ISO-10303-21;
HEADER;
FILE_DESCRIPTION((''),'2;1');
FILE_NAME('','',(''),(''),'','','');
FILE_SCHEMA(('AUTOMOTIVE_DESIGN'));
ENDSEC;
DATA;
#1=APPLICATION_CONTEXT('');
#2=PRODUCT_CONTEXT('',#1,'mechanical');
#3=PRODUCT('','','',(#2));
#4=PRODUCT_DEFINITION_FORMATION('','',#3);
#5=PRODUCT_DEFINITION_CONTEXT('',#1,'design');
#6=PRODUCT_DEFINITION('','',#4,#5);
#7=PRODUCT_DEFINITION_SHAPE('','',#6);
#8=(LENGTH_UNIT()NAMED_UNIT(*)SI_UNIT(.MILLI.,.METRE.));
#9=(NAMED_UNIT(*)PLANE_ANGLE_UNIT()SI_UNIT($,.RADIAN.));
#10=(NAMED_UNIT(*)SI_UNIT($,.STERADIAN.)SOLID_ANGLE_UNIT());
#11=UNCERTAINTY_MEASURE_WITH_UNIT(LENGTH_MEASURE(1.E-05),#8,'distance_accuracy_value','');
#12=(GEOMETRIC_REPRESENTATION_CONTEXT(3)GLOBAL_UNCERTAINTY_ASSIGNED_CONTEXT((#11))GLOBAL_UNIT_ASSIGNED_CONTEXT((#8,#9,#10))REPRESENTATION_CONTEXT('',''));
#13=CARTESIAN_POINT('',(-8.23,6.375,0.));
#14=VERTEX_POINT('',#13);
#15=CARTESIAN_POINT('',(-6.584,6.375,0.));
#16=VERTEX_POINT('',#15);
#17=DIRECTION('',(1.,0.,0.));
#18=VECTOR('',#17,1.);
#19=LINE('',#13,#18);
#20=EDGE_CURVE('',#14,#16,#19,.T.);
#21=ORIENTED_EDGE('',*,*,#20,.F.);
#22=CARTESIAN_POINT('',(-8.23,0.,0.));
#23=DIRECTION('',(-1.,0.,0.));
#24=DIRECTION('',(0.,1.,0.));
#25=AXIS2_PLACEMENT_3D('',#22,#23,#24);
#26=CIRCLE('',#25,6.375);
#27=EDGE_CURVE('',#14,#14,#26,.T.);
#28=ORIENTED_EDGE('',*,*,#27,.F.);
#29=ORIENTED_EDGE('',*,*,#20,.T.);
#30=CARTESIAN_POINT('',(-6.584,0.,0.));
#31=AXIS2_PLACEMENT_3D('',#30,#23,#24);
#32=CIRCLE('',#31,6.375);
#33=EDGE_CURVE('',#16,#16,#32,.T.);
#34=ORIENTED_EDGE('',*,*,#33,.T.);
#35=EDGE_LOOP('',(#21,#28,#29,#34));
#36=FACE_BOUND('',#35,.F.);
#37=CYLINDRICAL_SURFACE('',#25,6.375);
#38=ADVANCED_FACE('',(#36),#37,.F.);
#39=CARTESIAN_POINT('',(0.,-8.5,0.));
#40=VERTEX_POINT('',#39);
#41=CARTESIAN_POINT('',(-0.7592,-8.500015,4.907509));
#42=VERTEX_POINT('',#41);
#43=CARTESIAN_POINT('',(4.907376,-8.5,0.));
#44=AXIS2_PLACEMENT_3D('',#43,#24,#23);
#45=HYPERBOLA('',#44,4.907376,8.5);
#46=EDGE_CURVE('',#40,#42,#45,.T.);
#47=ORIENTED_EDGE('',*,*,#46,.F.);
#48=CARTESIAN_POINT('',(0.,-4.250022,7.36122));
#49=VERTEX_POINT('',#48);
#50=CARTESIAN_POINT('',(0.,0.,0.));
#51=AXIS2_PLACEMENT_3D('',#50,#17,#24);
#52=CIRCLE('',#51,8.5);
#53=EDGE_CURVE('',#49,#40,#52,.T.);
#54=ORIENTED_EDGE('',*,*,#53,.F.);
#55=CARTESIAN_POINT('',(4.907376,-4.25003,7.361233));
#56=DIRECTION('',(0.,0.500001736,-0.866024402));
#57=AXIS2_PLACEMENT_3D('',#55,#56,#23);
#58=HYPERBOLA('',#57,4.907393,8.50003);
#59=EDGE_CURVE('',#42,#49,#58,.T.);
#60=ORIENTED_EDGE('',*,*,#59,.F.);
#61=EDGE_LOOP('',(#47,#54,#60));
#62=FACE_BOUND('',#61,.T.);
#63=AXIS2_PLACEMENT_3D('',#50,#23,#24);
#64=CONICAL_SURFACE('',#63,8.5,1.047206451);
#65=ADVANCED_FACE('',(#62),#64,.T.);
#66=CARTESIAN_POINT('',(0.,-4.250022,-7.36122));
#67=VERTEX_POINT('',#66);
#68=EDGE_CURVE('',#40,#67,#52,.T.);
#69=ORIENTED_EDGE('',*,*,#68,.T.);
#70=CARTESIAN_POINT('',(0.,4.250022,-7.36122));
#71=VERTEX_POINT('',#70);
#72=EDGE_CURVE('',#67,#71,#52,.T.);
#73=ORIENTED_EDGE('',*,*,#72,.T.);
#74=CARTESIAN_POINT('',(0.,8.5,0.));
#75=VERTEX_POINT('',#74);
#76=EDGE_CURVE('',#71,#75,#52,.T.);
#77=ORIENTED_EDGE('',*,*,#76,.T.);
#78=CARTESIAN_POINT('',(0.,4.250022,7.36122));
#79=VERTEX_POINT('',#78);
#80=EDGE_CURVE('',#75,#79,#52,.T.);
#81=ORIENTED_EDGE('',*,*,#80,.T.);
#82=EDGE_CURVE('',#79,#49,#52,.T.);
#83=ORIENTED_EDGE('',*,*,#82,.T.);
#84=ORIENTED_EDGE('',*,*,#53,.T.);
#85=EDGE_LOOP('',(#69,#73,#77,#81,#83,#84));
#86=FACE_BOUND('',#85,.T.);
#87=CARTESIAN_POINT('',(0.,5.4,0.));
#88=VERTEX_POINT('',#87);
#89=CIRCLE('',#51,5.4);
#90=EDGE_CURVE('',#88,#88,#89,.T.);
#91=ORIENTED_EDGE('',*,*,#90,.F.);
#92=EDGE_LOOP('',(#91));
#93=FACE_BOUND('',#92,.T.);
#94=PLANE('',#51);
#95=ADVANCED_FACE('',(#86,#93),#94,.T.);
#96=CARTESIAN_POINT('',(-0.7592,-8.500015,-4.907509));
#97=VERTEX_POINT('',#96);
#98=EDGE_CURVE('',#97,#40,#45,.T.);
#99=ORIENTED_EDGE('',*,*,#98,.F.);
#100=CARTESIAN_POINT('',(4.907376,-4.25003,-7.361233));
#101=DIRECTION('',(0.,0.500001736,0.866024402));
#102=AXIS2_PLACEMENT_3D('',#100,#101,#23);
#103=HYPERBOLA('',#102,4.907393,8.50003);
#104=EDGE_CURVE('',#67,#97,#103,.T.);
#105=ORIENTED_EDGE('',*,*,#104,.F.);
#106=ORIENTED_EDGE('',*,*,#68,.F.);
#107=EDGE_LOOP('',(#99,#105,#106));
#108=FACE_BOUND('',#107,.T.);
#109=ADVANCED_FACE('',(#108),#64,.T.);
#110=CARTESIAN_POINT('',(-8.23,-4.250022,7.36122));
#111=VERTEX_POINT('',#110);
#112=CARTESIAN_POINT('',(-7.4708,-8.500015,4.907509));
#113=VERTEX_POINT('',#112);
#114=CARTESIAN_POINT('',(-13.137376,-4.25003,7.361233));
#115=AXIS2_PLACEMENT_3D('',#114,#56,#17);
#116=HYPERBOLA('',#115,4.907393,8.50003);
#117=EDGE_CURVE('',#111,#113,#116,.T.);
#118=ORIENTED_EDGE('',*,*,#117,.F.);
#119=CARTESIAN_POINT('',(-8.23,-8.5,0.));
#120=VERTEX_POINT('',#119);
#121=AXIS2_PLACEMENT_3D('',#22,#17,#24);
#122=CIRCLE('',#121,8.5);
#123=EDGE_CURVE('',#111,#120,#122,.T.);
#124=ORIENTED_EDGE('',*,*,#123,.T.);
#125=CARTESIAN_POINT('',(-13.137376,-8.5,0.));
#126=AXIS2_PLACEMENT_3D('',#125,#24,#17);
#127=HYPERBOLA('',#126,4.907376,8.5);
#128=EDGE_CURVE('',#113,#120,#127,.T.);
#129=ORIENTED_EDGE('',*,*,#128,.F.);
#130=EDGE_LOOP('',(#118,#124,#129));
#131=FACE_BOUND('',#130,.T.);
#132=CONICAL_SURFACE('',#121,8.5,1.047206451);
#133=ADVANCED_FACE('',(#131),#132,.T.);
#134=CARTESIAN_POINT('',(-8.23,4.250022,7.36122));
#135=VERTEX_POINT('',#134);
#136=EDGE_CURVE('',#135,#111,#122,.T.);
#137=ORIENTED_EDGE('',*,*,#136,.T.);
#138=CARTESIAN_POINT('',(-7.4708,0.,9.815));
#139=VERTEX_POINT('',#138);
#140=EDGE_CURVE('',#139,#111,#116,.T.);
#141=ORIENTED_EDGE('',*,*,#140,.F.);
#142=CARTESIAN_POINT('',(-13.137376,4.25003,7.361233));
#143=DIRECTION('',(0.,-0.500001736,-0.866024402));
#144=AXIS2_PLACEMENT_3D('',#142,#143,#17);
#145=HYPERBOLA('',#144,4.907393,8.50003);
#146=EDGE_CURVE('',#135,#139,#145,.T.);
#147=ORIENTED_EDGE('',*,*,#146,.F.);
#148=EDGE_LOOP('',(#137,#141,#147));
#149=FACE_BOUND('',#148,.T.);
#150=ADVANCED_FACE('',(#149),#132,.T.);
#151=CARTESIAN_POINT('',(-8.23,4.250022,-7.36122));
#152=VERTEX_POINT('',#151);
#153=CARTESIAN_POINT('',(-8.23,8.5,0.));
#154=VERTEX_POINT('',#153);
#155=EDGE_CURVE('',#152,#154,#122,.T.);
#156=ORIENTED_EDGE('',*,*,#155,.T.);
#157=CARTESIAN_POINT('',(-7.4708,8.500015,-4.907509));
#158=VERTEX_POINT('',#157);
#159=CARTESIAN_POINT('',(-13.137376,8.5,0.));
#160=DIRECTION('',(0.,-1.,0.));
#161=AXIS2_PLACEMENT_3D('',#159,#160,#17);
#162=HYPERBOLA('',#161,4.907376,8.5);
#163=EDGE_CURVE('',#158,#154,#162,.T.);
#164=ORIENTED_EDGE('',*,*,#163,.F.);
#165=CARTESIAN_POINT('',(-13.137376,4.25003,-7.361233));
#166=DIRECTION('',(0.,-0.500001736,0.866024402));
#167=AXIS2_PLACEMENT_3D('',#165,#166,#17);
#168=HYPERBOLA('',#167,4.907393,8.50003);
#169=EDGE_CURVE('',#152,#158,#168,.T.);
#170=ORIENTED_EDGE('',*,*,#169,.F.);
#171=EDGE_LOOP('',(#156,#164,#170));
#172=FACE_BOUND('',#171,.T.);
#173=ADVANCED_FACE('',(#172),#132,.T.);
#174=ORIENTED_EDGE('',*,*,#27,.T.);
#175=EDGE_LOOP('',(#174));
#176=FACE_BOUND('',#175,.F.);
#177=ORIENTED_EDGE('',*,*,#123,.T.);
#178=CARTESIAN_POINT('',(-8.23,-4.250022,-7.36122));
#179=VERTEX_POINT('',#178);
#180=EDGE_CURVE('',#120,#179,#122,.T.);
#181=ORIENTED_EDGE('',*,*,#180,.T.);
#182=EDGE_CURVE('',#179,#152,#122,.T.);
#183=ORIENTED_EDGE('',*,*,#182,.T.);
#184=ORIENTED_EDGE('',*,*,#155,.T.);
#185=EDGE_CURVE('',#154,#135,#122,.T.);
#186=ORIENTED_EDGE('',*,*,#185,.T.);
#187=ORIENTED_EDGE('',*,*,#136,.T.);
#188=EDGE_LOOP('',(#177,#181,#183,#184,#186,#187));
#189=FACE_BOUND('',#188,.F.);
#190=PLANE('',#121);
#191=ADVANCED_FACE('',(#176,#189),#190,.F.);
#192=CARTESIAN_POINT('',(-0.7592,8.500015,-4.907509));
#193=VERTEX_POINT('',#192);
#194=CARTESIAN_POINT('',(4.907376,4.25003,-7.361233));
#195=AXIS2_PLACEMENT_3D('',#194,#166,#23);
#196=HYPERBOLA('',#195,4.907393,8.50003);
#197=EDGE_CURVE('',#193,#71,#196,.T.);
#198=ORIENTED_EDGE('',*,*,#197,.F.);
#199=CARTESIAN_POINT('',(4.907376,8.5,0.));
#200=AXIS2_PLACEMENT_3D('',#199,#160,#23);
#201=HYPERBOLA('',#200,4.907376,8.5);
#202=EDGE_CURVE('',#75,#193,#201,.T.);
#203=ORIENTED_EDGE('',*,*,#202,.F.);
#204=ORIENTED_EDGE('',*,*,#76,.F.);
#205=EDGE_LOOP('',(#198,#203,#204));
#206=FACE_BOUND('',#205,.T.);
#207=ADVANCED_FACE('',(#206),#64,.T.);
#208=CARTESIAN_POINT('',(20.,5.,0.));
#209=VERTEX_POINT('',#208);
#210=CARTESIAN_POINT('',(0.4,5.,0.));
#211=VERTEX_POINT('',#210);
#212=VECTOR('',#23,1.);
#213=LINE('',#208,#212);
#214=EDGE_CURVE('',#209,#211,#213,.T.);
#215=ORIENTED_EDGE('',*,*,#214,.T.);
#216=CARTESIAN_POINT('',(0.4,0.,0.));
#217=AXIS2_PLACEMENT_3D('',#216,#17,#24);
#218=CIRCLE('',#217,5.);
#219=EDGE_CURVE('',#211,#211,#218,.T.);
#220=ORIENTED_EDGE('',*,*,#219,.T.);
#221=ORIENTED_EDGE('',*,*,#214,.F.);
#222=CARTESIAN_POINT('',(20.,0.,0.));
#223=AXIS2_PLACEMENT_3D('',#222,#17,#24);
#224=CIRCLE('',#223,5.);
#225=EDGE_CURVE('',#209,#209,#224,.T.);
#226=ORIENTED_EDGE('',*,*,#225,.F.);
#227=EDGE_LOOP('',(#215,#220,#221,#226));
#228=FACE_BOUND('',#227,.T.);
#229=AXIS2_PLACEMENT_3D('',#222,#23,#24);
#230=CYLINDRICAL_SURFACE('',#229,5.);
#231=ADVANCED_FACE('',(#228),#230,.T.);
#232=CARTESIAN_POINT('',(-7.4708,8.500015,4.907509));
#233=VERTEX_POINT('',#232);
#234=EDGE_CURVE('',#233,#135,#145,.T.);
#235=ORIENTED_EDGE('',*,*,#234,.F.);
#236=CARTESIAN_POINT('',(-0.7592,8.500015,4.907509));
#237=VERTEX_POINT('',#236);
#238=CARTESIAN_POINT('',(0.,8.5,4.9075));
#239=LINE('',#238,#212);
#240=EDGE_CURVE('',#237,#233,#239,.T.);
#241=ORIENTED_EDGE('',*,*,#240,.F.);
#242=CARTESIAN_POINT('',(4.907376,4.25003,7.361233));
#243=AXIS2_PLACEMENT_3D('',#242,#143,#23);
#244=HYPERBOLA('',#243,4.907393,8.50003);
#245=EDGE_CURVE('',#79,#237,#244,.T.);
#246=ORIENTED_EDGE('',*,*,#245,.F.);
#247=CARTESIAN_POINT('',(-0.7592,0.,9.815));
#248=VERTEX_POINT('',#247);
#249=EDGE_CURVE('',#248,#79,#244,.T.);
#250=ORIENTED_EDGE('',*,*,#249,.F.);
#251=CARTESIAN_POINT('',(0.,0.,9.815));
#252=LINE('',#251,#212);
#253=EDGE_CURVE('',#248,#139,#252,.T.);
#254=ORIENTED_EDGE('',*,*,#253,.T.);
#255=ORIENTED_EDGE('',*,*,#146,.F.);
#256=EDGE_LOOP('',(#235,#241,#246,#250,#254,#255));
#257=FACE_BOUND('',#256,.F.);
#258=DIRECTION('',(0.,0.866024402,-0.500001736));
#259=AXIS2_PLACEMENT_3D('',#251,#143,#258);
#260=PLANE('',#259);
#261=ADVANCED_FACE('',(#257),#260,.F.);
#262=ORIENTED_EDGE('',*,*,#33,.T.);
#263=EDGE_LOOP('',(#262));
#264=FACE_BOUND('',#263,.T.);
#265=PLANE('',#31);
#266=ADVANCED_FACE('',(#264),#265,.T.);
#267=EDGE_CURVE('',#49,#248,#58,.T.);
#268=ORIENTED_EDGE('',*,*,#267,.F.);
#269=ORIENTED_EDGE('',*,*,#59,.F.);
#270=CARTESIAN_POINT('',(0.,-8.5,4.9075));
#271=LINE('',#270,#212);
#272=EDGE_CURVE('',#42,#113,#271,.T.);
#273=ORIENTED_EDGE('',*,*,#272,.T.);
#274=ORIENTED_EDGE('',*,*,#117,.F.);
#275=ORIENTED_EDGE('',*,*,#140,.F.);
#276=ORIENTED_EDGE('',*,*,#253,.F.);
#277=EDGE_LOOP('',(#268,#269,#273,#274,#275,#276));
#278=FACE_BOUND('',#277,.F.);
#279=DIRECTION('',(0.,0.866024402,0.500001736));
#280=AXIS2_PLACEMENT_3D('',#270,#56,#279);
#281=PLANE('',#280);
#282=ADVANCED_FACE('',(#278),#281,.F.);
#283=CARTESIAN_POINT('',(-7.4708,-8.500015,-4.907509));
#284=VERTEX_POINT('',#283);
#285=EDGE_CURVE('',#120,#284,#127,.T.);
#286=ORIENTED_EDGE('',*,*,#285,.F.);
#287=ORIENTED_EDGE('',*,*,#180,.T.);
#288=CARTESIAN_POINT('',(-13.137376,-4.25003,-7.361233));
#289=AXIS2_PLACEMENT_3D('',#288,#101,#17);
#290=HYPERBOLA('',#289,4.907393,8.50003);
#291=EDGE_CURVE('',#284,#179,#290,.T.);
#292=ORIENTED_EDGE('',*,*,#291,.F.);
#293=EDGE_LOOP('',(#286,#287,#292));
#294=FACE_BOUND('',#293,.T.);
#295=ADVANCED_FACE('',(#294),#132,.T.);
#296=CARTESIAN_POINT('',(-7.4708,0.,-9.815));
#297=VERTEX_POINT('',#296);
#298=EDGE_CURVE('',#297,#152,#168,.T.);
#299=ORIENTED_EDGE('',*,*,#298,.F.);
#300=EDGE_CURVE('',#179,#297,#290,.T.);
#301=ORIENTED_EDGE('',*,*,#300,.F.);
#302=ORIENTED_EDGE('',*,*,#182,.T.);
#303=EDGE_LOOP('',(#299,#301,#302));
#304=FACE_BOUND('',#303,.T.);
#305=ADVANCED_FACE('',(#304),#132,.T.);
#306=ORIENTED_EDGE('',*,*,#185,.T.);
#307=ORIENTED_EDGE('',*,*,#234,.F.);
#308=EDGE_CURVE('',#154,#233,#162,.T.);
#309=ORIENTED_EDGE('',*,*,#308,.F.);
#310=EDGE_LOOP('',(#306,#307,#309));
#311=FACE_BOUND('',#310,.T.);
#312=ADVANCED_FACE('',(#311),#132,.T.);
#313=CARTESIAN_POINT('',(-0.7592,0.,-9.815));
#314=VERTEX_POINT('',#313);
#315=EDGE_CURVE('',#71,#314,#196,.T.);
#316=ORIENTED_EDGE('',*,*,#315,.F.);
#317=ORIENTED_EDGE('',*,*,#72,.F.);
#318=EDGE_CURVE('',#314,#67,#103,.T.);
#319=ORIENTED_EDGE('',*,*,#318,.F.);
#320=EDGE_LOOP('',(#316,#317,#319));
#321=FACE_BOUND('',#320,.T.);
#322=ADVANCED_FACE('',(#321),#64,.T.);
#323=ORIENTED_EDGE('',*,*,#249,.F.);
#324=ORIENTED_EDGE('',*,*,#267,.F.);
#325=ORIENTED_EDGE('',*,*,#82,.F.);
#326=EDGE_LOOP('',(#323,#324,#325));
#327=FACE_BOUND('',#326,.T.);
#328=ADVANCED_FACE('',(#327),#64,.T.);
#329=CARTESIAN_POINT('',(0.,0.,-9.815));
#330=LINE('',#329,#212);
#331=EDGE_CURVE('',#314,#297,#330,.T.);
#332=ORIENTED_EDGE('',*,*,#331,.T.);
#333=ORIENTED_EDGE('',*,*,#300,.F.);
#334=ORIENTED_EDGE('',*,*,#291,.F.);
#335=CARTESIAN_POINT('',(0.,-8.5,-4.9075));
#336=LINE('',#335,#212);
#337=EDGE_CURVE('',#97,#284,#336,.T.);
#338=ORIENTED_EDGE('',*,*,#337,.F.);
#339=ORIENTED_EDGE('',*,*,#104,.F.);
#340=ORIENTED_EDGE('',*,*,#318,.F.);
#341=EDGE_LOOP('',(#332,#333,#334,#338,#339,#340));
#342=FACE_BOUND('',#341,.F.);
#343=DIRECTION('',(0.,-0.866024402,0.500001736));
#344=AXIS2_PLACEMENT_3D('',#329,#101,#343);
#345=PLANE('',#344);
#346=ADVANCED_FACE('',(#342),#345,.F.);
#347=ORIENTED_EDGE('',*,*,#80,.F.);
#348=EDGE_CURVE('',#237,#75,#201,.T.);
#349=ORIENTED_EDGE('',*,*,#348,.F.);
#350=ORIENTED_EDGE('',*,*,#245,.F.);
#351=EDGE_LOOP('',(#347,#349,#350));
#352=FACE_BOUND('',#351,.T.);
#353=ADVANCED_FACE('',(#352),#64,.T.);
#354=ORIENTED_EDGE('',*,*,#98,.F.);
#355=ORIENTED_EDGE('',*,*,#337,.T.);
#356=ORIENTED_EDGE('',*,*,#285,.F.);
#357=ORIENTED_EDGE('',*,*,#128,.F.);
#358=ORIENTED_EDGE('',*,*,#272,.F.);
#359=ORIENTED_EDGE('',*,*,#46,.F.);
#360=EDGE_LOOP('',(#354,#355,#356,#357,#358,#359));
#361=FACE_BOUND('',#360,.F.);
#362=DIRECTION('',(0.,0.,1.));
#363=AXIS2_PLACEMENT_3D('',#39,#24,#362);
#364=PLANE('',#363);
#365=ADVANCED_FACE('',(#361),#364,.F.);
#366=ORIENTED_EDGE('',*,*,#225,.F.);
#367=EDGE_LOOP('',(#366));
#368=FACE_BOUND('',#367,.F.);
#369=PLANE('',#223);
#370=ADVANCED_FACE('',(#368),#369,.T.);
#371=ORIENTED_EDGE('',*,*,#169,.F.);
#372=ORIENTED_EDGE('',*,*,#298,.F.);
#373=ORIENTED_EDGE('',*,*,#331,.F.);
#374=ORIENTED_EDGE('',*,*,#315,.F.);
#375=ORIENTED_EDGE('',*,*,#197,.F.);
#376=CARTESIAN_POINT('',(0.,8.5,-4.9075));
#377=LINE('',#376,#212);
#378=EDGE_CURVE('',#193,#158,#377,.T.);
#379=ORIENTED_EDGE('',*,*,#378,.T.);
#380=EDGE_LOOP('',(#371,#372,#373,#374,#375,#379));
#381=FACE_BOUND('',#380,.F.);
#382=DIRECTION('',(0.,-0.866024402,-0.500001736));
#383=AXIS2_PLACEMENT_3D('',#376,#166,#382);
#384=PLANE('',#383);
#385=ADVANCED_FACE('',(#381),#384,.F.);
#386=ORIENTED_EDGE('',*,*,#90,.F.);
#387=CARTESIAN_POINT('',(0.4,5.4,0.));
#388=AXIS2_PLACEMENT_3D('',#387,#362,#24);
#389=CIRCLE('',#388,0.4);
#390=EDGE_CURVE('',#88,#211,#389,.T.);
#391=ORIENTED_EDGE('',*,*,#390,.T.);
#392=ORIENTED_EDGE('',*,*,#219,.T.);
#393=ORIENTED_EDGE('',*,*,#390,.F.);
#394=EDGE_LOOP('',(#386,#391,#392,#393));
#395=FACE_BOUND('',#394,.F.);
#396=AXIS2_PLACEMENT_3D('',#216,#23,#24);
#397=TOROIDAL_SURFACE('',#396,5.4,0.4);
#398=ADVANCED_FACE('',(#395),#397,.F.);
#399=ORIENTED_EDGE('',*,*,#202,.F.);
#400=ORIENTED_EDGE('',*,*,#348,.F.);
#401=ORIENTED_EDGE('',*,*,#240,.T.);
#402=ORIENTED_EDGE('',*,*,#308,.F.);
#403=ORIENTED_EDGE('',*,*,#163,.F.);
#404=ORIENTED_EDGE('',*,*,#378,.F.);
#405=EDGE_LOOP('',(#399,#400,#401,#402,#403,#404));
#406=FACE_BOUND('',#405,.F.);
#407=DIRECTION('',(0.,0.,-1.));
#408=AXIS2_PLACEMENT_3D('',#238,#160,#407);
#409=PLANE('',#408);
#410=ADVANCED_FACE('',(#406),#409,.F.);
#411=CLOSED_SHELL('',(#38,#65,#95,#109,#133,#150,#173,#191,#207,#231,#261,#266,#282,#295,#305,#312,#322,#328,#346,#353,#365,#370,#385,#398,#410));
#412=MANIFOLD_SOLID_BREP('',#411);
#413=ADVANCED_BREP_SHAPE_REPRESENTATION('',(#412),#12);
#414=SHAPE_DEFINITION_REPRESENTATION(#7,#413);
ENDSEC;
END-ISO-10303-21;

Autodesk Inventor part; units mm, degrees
ref_plane "YZ Plane" through (0, 0, 0) normal (1, 0, 0) x (0, 1, 0)
ref_plane "XZ Plane" through (0, 0, 0) normal (0, 1, 0) x (-1, 0, 0)
sketch "Sketch1" plane through (0, 0, 0) normal (0, 0, 1) x (1, 0, 0)
  line L0 (0, 5) -> (0, 0)
  line L1 (0, 0) -> (20, 0)
  line L2 (20, 0) -> (20, 5)
  line L3 (20, 5) -> (0, 5)
  line L4 (-4, 0) -> (24, 0) projected
  line L5 (0, -1) -> (0, 6) projected
  dimension "d0" = 10
  dimension "d1" = 20
revolve "Body" add sketch "Sketch1" angle 360 about axis through (0, 0, 0) along (1, 0, 0)
sketch "Sketch2" plane through (0, 0, 0) normal (1, 0, 0) x (0, 1, 0)
  line L0 (0, 9.815) -> (8.5, 4.9075)
  line L1 (8.5, 4.9075) -> (8.5, -4.9075)
  line L2 (8.5, -4.9075) -> (0, -9.815)
  line L3 (0, -9.815) -> (-8.5, -4.9075)
  line L4 (-8.5, -4.9075) -> (-8.5, 4.9075)
  line L5 (-8.5, 4.9075) -> (0, 9.815)
  line L6 (-11.9, 0) -> (11.9, 0) projected
  line L7 (0, -13.7409) -> (0, 13.7409) projected
  point P0 (0, 0)
  point P1 (0, 0)
  dimension "d2" = 17
extrude "Head" add sketch "Sketch2" against normal blind 8.23
sketch "Sketch3" plane through (-8.23, 0, 0) normal (-1, 0, 0) x (0, 1, 0)
  circle A0 centre (0, 0) radius 6.375
  point P0 (0, 0)
  dimension "d12" = 12.75
extrude "Indent1" cut sketch "Sketch3" against normal blind 1.646
sketch "Sketch4" plane through (0, 0, 0) normal (0, 0, 1) x (1, 0, 0)
  line L0 (-8.23, 9.815) -> (-8.23, 8.5)
  line L1 (-8.23, 8.5) -> (-7.4708, 9.815)
  line L2 (-7.4708, 9.815) -> (-8.23, 9.815)
  line L3 (0, 9.815) -> (0, 8.5)
  line L4 (0, 8.5) -> (-0.7592, 9.815)
  line L5 (-0.7592, 9.815) -> (0, 9.815)
  line L6 (0, 0) -> (-8.23, 0) projected
  line L7 (-8.23, 0) -> (-8.23, 8.5) projected
  line L8 (0, 0) -> (0, 8.5) projected
  line L9 (-9.876, 0) -> (1.646, 0) projected
  line L10 (-7.4708, 9.815) -> (-0.7592, 9.815) construction
  line L11 (0, -1.963) -> (0, 11.7779) projected
  dimension "d6" = 30
  dimension "d7" = 30
  dimension "d16" = 17
  dimension "d17" = 17
  dimension "d18" = 19.6299
revolve "Chamfer1" cut sketch "Sketch4" angle 360 about axis through (-10, 0, 0) along (1, 0, 0)
fillet "Fillet1" radius 0.4 1 edges at (0, -5, 0)
thread "Thread" size "M10x1.5" class "6g" standard "ISO Metric profile" length 17
ref_plane "Work Plane1" through (3, 0, 0) normal (0, 0.5, 0.8660254) x (1, 0, 0)
equation "\"d2\" = SW"
equation "\"d3\" = KOH"
equation "\"d12\" = 0.75 * SW0"
equation "\"d14\" = 0.2 * KOH"
equation "\"d11\" = RR"
equation "\"d8\" = GEL"
equation "\"d0\" = GD"
equation "\"d1\" = NLG"
equation "\"d6\" = ANG1"
equation "\"d7\" = ANG1"
equation "\"d16\" = SW0"
equation "\"d17\" = SW0"
equation "\"d18\" = 1.1547 * SW"
equation "\"NLG\" = 20"
equation "\"KOH\" = 8.23"
equation "\"GD\" = NND"
equation "\"GEL\" = 17"
equation "\"SW\" = 17"
equation "\"SW0\" = SW"
equation "\"ANG1\" = 30deg"
equation "\"RR\" = 0.4"
equation "\"GUL\" = 0.61345 * PTC"
equation "\"SPD\" = NND - 1.2269 * PTC"
equation "\"GD1\" = THREADDIA - 1.2269 * PTC"
equation "\"SDH\" = 11.2"
equation "\"TOA\" = 30deg"
equation "\"FAWI\" = 45deg"
equation "\"PTC\" = 1.5"
equation "\"GAL\" = 0.61345 * PTC"
equation "\"SD\" = 0"
equation "\"SD2\" = SDH"
equation "\"E0\" = 1.155 * SW"
equation "\"NND\" = 10"
equation "\"THREADDIA\" = 10"
properties part number "AS 1427 - M10 x 20" material "Steel, Mild"
